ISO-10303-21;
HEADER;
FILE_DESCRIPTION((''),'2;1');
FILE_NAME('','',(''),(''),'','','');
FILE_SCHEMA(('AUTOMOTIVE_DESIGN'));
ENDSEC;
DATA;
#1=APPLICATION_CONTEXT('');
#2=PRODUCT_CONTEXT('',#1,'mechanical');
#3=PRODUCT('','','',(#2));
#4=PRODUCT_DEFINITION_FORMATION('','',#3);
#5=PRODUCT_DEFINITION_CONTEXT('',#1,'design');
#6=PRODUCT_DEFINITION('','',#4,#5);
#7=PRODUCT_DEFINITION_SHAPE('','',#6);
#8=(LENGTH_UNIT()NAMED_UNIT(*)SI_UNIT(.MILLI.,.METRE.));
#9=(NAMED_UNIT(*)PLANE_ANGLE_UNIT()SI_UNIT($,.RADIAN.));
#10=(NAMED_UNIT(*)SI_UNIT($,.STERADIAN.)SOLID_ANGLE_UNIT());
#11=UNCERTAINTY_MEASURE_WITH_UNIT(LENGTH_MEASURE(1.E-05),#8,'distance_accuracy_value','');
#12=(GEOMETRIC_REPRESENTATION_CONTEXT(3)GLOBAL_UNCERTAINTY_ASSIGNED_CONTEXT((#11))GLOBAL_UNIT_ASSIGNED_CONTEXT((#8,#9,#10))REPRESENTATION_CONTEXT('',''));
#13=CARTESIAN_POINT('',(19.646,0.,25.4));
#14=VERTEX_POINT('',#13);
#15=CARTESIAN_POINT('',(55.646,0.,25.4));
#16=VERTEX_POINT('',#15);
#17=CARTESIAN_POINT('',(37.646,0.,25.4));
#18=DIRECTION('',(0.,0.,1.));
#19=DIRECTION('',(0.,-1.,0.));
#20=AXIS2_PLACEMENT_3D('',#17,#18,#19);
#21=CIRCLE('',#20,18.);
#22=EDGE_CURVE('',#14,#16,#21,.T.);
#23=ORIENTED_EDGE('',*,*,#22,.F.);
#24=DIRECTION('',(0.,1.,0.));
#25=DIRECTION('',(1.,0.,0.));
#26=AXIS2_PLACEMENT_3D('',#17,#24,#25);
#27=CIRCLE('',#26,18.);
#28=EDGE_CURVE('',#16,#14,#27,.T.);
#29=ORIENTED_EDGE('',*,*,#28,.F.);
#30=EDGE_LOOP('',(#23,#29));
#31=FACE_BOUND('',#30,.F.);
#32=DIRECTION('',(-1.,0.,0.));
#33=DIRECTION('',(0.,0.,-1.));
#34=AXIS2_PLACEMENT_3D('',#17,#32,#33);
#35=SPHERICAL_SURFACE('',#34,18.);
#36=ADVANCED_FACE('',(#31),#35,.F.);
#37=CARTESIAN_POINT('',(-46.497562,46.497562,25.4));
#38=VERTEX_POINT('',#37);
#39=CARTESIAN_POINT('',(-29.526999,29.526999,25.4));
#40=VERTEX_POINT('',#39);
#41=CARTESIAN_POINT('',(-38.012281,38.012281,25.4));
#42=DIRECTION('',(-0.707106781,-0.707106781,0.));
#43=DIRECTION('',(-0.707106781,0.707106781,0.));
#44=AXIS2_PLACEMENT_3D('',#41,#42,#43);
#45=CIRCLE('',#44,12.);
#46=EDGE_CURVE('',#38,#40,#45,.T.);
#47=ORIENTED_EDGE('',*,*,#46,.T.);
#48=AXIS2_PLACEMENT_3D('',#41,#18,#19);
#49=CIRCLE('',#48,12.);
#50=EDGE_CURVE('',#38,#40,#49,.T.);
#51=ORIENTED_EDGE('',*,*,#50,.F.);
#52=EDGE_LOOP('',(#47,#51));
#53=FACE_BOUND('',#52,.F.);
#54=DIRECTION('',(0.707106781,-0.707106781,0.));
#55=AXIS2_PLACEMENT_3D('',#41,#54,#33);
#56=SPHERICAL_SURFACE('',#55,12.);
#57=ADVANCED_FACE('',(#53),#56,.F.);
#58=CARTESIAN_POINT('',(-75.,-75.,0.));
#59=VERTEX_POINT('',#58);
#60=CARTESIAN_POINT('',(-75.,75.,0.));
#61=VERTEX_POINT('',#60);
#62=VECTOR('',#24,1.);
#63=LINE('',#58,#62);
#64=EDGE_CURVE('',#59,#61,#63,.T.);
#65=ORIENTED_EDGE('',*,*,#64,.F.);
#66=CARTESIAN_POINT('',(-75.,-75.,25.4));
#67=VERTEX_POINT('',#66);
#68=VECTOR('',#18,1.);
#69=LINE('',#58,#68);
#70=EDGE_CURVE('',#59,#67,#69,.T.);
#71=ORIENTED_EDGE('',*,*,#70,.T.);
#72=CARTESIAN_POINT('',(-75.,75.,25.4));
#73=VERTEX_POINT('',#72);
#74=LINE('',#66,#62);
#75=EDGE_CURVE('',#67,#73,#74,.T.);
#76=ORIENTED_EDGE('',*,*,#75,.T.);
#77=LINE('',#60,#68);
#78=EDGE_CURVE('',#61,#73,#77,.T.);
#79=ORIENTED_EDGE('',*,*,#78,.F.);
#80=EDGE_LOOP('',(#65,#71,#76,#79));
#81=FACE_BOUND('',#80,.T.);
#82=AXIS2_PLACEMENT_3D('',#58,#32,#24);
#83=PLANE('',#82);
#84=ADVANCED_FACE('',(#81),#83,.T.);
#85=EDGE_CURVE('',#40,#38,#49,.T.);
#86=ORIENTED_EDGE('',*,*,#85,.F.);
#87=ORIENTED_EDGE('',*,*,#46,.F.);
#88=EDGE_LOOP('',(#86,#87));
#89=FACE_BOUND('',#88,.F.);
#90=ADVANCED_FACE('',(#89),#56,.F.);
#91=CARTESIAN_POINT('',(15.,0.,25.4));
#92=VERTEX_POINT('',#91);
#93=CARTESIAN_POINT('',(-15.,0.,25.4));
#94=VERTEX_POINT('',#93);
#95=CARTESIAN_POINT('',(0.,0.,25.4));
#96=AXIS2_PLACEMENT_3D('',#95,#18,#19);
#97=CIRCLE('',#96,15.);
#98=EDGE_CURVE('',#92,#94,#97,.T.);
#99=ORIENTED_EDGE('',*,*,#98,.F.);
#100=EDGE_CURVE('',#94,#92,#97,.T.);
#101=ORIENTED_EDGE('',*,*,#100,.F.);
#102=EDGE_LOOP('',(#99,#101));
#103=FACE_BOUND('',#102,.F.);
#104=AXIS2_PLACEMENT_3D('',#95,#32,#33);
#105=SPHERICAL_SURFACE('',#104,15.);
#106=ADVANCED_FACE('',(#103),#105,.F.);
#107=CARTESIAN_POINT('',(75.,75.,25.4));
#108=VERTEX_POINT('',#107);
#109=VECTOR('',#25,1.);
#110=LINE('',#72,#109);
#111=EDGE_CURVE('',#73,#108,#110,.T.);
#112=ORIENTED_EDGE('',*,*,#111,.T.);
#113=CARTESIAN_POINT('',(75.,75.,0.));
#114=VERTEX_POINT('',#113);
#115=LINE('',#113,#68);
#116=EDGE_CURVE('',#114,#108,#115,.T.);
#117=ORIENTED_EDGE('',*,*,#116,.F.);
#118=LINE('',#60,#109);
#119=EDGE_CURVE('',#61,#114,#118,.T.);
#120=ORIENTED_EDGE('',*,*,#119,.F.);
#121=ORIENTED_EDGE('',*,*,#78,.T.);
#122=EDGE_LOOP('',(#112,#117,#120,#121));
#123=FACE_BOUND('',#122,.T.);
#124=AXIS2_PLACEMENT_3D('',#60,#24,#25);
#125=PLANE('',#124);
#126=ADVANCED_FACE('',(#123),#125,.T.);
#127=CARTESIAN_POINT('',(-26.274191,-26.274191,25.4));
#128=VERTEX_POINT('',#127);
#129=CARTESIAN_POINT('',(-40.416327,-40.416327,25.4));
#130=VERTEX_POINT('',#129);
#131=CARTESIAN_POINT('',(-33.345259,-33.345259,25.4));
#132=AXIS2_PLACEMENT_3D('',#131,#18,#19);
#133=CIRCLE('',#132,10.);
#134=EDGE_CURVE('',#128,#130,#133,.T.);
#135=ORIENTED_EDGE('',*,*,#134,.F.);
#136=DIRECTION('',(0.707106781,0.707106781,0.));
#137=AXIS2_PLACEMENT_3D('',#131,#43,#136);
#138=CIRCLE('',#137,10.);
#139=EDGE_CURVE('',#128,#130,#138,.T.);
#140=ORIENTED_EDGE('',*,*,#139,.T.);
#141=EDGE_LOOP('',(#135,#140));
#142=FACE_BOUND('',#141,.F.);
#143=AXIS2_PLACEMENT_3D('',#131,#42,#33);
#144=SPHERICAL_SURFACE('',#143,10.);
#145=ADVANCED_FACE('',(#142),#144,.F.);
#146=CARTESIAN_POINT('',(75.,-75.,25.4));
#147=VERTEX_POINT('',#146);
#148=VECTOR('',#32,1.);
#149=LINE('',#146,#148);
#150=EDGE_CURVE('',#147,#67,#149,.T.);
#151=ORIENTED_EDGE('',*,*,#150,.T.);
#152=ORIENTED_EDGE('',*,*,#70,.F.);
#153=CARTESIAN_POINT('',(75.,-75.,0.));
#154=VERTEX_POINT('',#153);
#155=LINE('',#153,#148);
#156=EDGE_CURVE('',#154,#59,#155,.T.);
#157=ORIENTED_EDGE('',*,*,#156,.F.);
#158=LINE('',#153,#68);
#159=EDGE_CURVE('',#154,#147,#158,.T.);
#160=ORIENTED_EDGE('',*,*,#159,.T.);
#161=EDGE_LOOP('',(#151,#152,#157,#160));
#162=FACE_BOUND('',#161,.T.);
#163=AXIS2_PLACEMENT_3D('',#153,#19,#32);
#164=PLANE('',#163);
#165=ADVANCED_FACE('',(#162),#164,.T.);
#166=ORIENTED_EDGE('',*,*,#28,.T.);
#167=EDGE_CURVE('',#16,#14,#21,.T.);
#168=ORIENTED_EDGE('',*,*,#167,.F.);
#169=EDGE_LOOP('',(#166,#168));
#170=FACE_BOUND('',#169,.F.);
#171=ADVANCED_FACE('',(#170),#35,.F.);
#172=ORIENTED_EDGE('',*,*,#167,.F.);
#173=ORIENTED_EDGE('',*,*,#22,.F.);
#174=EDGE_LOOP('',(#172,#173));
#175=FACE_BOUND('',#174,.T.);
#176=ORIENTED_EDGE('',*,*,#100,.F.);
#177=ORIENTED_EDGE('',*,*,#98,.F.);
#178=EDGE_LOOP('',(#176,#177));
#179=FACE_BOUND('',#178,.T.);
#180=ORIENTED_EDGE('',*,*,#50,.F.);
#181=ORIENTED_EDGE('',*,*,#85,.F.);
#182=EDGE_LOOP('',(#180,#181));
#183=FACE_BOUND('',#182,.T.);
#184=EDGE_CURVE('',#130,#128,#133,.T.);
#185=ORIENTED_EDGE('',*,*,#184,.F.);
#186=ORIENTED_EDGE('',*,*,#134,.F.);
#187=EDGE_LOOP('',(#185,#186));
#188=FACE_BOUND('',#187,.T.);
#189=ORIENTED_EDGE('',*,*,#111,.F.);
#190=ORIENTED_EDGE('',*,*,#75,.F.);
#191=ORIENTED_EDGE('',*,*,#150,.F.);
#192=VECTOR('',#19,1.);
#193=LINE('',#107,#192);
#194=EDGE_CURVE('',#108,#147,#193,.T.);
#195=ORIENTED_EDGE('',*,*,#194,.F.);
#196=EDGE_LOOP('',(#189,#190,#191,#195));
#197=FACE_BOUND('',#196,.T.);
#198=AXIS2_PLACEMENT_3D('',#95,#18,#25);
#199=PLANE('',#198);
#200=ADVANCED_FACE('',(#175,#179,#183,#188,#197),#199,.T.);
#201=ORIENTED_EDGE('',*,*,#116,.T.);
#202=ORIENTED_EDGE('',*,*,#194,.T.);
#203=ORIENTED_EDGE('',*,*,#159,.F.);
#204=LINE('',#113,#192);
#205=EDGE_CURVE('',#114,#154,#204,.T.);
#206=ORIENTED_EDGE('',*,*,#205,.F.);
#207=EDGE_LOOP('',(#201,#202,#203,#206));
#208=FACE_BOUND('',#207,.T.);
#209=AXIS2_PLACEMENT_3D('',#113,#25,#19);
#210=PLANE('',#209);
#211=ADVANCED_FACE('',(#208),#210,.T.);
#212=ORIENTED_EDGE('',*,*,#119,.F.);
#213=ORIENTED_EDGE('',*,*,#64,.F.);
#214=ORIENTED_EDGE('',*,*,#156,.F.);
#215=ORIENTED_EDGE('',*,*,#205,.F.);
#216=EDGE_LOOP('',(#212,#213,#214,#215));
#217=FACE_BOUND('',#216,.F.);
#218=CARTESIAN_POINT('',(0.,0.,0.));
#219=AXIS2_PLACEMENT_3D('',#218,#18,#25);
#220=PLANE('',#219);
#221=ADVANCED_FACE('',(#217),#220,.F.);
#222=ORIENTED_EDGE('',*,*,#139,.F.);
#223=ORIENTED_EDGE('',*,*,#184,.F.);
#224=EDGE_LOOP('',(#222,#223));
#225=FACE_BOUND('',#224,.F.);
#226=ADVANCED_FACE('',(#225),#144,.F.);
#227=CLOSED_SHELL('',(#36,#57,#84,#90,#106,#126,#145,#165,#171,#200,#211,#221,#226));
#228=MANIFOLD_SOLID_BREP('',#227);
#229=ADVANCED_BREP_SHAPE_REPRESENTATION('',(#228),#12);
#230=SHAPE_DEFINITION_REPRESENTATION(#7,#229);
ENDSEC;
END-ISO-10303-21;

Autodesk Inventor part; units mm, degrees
sketch "Boceto1" plane through (0, 0, 0) normal (0, 0, 1) x (1, 0, 0)
  line L0 (-75, 75) -> (75, 75)
  line L1 (75, 75) -> (75, -75)
  line L2 (75, -75) -> (-75, -75)
  line L3 (-75, -75) -> (-75, 75)
  line L4 (-75, 75) -> (75, -75) construction
  line L5 (75, 75) -> (-75, -75) construction
  point P0 (0, 0)
  dimension "d0" = 150
  dimension "d1" = 150
extrude "Extrusión1" add sketch "Boceto1" along normal blind 25.4
sketch "Boceto3" plane through (0, 0, 0) normal (0, 1, 0) x (-1, 0, 0)
  line L0 (-75, 25.4) -> (75, 25.4) projected
  arc A0 (-15, 25.4) -> (15, 25.4) centre (0, 25.4) ccw
  line L1 (15, 25.4) -> (-15, 25.4)
  point P0 (0, 0)
  dimension "d7" = 15
revolve "Revolución2" cut sketch "Boceto3" angle 360 about axis through (75, 0, 25.4) along (-1, 0, 0)
ref_plane "Plano de trabajo1" through (-75, -75, 0) normal (-0.7071068, 0.7071068, 0) x (0, 0, 1)
ref_plane "Plano de trabajo2" through (75, -75, 0) normal (-0.7071068, -0.7071068, 0) x (0, 0, 1)
sketch "Boceto4" plane through (-75, -75, 0) normal (-0.7071068, 0.7071068, 0) x (0, 0, 1)
  line L0 (25.4, 106.066) -> (25.4, 0) projected
  arc A0 (25.4, 68.9087) -> (25.4, 48.9087) centre (25.4, 58.9087) ccw
  line L1 (25.4, 48.9087) -> (25.4, 68.9087)
  point P0 (0, 106.066)
  dimension "d11" = 10
sketch "Boceto5" plane through (75, -75, 0) normal (-0.7071068, -0.7071068, 0) x (0, 0, 1)
  line L0 (25.4, 106.066) -> (25.4, 212.132) projected
  arc A0 (25.4, 171.8235) -> (25.4, 147.8235) centre (25.4, 159.8235) ccw
  line L1 (25.4, 171.8235) -> (25.4, 147.8235)
  point P0 (0, 106.066)
  dimension "d12" = 12
sketch "Boceto6" plane through (0, 0, 0) normal (0, 1, 0) x (-1, 0, 0)
  arc A0 (-55.646, 25.4) -> (-19.646, 25.4) centre (-37.646, 25.4) ccw
  line L0 (-19.646, 25.4) -> (-55.646, 25.4)
  line L1 (-75, 25.4) -> (75, 25.4) projected
  point P0 (0, 0)
  dimension "d13" = 18
revolve "Revolución3" cut sketch "Boceto5" angle 360 about axis through (0, 0, 25.4) along (-0.7071068, 0.7071068, 0)
revolve "Revolución4" cut sketch "Boceto4" angle 360 about axis through (0, 0, 25.4) along (-0.7071068, -0.7071068, 0)
revolve "Revolución5" cut sketch "Boceto6" angle 360 about axis through (19.646, 0, 25.4) along (1, 0, 0)
properties part number "Placa - Pitting Esfera"
